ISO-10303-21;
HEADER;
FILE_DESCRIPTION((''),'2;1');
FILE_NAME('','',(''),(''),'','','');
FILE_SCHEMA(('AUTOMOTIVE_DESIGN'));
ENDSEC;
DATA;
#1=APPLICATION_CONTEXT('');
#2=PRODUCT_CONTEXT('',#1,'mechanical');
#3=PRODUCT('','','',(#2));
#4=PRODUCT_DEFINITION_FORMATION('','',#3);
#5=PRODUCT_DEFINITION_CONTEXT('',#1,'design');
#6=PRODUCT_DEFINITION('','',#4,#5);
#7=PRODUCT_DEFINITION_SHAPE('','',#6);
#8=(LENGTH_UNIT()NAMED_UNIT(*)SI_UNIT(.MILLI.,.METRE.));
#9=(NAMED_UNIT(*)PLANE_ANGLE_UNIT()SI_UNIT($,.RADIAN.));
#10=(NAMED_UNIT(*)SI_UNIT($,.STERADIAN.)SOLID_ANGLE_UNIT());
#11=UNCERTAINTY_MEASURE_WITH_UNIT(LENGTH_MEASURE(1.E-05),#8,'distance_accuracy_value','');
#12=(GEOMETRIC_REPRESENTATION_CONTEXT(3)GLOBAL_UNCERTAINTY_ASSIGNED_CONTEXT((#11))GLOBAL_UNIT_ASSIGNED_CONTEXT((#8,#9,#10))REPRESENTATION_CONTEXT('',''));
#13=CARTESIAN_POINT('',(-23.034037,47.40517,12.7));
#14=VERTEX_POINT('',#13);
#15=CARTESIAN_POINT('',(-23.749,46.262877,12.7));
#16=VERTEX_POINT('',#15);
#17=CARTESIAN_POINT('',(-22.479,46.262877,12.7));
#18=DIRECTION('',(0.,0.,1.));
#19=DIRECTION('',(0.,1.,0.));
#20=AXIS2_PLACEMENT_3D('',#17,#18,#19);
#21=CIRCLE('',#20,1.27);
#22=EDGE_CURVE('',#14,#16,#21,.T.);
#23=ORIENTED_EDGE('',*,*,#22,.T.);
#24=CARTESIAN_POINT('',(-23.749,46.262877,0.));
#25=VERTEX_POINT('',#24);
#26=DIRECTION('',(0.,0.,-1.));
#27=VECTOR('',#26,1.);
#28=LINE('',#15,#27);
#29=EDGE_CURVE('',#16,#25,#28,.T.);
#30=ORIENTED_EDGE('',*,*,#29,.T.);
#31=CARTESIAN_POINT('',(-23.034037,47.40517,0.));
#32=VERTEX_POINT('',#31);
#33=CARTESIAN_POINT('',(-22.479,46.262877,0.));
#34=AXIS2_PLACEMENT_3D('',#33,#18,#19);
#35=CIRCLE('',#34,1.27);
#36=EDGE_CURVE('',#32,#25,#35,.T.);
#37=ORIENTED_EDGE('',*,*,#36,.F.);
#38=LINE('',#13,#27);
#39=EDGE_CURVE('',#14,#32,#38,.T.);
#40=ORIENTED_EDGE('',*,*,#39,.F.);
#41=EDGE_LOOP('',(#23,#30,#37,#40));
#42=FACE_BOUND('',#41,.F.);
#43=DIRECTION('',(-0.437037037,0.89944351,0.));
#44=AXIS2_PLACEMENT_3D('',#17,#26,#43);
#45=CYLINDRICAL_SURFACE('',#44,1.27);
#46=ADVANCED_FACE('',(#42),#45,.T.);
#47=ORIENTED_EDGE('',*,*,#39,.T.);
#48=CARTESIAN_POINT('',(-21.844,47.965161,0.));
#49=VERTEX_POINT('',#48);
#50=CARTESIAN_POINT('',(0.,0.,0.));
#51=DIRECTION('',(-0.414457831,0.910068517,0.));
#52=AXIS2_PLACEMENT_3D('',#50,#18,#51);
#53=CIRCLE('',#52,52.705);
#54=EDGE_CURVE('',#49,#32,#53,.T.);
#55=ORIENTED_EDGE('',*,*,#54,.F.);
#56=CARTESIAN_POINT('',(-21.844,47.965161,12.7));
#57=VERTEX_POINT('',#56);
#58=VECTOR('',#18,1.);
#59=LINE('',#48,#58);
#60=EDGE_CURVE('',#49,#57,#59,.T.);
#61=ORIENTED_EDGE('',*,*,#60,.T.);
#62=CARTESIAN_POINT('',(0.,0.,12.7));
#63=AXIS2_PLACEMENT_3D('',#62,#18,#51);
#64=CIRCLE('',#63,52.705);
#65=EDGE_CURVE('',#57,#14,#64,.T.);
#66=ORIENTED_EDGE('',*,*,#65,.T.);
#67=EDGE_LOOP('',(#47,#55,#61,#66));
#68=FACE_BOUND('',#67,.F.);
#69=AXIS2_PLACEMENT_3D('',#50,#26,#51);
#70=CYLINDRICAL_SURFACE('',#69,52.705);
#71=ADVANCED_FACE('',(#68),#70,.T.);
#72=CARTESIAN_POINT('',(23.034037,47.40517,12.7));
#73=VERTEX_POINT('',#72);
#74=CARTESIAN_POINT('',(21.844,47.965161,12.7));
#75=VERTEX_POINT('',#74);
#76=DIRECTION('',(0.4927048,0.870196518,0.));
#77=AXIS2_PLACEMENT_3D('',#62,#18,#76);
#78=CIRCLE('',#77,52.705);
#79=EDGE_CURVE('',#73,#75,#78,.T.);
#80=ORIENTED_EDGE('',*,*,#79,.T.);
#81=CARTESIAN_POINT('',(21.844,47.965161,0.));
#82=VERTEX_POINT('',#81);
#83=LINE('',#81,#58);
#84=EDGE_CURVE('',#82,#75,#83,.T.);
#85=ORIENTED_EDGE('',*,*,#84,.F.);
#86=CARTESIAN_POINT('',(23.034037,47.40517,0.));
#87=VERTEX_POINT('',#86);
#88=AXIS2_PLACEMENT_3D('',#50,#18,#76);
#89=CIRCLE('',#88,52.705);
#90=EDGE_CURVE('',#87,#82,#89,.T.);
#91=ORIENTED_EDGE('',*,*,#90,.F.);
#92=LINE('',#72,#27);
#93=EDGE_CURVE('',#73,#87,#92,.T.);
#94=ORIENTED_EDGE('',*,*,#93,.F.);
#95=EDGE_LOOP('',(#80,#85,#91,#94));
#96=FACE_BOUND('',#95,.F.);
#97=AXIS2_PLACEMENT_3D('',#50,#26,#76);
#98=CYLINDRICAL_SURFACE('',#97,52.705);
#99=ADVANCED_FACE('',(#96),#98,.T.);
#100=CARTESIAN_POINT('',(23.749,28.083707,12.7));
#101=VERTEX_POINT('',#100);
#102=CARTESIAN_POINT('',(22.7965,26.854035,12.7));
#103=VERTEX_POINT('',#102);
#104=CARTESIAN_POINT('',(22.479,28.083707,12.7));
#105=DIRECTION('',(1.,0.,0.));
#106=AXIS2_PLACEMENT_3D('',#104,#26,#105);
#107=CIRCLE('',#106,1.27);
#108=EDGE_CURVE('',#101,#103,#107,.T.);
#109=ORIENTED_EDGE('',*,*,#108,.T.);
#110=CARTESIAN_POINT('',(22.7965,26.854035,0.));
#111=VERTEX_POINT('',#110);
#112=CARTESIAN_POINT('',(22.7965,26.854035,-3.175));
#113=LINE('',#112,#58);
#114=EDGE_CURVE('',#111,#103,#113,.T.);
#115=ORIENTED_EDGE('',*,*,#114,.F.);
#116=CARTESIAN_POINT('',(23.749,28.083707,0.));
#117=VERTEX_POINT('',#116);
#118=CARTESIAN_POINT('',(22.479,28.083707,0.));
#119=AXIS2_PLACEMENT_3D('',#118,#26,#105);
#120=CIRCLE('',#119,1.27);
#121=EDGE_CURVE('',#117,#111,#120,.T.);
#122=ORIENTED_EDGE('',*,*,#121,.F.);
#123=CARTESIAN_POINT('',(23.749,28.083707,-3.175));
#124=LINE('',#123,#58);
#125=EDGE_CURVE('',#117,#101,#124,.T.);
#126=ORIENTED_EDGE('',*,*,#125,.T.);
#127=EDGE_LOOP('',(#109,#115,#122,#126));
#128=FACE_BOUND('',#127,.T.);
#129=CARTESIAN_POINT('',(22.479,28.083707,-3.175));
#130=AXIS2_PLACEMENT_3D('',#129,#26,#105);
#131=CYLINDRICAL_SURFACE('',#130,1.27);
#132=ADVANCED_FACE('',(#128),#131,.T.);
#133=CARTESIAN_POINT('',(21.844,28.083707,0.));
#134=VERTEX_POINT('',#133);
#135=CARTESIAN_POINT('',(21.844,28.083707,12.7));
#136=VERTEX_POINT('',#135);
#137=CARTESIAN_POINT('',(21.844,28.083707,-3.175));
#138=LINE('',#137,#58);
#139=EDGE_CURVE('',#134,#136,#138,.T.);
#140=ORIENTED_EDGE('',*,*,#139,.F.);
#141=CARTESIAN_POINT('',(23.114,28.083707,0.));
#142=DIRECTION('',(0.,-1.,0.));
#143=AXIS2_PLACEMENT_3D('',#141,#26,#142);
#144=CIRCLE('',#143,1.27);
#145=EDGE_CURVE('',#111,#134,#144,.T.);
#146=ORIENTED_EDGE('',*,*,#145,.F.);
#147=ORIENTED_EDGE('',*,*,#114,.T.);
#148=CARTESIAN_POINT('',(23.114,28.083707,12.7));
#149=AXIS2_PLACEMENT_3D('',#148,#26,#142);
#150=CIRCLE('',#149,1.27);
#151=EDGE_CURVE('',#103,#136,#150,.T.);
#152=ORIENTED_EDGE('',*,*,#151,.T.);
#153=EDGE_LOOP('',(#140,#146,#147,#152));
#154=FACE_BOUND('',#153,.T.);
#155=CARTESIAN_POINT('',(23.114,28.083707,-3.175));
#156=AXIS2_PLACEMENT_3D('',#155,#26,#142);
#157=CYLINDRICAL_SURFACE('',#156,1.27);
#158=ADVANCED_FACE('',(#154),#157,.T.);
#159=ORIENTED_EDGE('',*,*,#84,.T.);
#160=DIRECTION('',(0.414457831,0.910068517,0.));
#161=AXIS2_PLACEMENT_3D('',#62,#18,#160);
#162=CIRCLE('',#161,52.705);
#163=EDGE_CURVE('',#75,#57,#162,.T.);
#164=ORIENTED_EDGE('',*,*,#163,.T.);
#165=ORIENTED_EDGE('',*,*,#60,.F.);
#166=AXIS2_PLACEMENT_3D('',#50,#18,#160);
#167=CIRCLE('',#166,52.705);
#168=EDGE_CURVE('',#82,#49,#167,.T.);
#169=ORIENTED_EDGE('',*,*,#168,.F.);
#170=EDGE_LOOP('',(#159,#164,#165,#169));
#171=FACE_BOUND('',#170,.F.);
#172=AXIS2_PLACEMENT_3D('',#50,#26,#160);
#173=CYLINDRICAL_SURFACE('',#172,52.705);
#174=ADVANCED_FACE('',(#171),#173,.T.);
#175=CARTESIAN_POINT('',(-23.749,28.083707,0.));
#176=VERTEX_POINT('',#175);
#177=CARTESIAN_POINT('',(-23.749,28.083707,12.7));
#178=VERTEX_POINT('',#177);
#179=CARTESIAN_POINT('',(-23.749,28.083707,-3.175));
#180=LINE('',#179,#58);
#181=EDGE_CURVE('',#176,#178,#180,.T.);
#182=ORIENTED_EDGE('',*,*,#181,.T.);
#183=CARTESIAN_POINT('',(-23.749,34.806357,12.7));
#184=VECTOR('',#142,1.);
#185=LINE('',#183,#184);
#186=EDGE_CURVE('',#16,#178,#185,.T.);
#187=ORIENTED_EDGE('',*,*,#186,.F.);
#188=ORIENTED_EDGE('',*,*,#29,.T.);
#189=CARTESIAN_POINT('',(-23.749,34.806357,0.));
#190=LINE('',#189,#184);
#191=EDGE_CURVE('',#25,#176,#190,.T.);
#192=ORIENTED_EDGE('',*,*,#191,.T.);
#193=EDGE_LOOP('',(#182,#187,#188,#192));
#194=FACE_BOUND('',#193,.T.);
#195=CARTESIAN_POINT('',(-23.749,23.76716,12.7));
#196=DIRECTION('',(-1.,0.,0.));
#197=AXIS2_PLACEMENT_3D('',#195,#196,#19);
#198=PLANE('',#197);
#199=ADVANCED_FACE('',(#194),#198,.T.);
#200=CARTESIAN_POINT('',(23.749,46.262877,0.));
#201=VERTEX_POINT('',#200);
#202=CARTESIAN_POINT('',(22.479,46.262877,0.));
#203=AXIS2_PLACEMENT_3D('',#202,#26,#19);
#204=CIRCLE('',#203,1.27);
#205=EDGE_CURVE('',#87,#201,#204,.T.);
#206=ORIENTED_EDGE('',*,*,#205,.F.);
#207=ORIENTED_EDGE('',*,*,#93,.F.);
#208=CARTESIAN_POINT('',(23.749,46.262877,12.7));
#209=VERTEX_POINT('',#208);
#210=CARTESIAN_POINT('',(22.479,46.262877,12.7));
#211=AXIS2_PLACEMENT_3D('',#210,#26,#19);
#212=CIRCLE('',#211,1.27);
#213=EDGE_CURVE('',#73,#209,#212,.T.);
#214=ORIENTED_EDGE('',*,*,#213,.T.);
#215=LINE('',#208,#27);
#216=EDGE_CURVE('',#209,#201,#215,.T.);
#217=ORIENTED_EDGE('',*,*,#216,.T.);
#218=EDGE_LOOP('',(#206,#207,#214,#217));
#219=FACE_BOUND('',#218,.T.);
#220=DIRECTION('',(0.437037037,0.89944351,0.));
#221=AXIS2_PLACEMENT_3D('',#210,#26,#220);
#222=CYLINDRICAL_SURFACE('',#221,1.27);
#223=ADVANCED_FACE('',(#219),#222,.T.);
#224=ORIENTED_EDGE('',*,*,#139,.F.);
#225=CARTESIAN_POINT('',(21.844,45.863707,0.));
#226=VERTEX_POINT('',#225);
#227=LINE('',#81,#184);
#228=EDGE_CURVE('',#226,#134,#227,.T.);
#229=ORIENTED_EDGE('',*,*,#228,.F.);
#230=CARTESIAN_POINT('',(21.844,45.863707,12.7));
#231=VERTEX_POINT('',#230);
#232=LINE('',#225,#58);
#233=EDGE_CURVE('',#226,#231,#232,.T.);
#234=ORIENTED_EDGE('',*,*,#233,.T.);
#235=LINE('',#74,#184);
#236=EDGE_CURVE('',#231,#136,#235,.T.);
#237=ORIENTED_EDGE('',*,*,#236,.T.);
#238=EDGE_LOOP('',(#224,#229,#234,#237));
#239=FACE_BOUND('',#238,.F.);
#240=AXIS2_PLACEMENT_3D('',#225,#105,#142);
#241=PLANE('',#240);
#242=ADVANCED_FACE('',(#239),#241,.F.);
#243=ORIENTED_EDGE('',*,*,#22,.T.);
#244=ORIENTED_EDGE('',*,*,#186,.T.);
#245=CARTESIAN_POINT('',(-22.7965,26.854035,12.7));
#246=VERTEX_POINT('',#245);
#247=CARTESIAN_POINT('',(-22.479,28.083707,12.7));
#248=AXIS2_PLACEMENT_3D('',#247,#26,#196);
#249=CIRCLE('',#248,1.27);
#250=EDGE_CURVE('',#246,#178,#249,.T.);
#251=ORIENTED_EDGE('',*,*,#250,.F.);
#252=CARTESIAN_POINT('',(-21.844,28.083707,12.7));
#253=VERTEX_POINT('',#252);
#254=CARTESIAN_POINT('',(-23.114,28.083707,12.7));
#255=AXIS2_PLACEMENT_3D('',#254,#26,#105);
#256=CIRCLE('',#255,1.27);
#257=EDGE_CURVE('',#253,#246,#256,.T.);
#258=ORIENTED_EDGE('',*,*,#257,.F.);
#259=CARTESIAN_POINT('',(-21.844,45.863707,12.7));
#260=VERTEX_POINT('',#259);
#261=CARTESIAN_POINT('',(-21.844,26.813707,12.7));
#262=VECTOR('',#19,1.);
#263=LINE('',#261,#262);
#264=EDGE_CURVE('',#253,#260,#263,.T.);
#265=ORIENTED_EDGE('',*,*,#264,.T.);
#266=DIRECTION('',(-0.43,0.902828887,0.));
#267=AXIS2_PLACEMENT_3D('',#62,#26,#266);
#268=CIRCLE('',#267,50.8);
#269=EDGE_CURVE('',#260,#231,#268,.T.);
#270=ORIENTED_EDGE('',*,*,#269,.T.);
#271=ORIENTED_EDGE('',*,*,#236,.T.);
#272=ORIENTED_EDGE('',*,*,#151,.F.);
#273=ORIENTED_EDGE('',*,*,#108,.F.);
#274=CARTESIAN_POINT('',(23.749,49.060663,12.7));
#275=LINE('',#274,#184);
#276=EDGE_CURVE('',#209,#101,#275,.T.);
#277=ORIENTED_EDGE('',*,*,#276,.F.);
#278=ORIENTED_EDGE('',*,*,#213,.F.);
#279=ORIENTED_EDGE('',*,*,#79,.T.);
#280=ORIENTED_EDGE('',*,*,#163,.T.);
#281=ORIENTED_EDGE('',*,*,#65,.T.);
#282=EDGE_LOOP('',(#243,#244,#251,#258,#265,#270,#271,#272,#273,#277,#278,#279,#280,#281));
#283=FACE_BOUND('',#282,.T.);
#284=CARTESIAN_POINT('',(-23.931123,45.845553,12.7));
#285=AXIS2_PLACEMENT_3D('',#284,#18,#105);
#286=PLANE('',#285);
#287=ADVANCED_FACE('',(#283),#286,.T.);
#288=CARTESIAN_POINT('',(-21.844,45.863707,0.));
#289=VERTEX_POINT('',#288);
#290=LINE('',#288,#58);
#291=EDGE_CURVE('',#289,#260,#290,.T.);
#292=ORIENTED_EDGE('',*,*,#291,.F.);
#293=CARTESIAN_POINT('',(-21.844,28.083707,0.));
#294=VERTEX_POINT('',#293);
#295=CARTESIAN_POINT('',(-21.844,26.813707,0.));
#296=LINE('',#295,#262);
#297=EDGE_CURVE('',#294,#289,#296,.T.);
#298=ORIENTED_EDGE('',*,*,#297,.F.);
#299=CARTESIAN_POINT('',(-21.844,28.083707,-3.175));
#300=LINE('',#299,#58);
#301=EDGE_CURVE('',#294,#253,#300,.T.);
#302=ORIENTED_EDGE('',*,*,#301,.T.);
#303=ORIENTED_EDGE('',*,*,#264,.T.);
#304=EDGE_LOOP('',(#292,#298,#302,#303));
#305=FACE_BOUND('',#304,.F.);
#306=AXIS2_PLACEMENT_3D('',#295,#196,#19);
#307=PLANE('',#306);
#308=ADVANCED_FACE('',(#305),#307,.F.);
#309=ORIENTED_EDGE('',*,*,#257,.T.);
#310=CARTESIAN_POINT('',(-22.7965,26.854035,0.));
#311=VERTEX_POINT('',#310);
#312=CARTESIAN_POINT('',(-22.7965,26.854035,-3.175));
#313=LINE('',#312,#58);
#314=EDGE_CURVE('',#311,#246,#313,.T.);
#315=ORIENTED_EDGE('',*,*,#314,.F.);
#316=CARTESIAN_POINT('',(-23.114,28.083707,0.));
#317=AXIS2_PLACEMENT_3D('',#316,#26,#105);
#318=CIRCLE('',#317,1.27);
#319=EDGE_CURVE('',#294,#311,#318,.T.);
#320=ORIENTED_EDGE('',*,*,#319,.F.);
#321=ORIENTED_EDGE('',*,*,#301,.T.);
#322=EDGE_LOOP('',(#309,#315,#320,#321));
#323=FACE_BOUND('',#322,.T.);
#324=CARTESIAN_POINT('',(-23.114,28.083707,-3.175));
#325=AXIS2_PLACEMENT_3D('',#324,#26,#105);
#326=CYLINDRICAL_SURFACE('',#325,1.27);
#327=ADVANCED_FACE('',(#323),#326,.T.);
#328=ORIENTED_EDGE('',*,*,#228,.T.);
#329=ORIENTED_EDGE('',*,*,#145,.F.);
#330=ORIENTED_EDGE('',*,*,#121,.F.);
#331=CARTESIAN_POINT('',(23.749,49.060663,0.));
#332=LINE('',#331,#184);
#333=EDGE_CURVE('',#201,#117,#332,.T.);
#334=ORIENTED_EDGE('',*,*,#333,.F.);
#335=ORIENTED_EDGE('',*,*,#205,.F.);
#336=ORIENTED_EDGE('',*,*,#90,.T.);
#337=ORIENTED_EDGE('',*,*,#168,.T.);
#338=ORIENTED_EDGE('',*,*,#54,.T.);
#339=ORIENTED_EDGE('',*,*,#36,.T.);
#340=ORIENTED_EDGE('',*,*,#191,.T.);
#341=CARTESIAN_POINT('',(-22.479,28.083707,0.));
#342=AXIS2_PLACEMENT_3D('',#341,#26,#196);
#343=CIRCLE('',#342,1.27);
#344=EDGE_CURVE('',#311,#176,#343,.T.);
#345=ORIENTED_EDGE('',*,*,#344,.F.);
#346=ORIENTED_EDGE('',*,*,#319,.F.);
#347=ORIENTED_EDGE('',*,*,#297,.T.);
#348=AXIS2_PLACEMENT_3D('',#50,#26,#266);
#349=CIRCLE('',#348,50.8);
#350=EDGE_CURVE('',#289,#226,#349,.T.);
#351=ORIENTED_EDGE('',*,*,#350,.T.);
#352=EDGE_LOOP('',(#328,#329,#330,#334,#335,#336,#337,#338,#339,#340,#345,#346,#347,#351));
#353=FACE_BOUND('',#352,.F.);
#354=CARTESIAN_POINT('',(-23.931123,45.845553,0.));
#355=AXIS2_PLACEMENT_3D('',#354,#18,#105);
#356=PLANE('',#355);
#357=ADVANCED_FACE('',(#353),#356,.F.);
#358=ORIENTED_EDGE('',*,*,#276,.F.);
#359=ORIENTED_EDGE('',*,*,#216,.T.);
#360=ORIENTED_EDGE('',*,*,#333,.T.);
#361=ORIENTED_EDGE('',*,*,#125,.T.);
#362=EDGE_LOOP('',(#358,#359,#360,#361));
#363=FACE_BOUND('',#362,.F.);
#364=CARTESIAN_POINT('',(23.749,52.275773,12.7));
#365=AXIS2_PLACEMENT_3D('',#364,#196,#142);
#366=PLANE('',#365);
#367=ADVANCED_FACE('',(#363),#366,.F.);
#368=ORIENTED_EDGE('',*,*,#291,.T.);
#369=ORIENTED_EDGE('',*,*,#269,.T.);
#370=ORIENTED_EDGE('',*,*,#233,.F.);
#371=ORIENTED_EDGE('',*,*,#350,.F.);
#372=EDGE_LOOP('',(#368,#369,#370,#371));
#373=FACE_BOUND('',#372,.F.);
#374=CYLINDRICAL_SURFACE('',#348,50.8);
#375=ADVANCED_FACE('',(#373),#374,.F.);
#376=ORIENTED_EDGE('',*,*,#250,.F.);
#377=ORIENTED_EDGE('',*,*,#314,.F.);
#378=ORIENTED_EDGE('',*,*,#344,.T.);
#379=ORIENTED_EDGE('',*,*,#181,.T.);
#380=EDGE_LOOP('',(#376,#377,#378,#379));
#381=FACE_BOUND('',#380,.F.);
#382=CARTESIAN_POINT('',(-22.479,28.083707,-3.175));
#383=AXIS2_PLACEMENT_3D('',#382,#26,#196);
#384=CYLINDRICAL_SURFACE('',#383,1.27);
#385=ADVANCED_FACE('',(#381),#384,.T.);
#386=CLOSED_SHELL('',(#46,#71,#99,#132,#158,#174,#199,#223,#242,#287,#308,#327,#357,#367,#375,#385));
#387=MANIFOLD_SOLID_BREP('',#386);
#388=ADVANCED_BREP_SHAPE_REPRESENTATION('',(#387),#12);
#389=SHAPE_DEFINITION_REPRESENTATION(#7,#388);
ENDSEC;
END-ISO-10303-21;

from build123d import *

# Parameters (mm, degrees)
F1_DEPTH    = 12.7
F3_DEPTH    = 32.1945
F4_T1_DEPTH = 19.05
F5_R        = 1.27


# Not quite as in the source:
# - a fillet or chamfer that OpenCascade refuses, or shapes differently, is made with other operations: its cross-section is extruded or revolved along the edge and cut away or added


with BuildPart() as f1:
    # F0 (on Top) → F1 (new body)
    with BuildSketch(Plane.XY):
        with BuildLine():
            Line((-25.9680064888, 45.8637074821), (-25.9680064888, 43.6612258073))
            ThreePointArc((-25.9680064888, 43.6612258073), (-23.9313543809, 44.8099350312), (-21.844, 45.8637074821))
            Line((-21.844, 45.8637074821), (-21.844, 47.9651612006))
            ThreePointArc((-21.844, 47.9651612006), (-23.929083101, 46.9597275008), (-25.9680064888, 45.8637074821))
        make_face()
        with BuildLine():
            ThreePointArc((-21.844, 45.8637074821), (-23.9313543809, 44.8099350312), (-25.9680064888, 43.6612258073))
            Line((-25.9680064888, 43.6612258073), (-25.9680064888, 26.8137074821))
            Line((-25.9680064888, 26.8137074821), (-21.844, 26.8137074821))
            Line((-21.844, 26.8137074821), (-21.844, 45.8637074821))
        make_face()
        with BuildLine():
            ThreePointArc((21.844, 45.8637074821), (23.9313543809, 44.8099350312), (25.9680064888, 43.6612258073))
            Line((25.9680064888, 43.6612258073), (25.9680064888, 45.8637074821))
            ThreePointArc((25.9680064888, 45.8637074821), (23.929083101, 46.9597275008), (21.844, 47.9651612006))
            Line((21.844, 47.9651612006), (21.844, 45.8637074821))
        make_face()
        with BuildLine():
            Line((25.9680064888, 26.8137074821), (25.9680064888, 43.6612258073))
            ThreePointArc((25.9680064888, 43.6612258073), (23.9313543809, 44.8099350312), (21.844, 45.8637074821))
            Line((21.844, 45.8637074821), (21.844, 26.8137074821))
            Line((21.844, 26.8137074821), (25.9680064888, 26.8137074821))
        make_face()
        with BuildLine():
            ThreePointArc((-21.844, 45.8637074821), (0, 50.8), (21.844, 45.8637074821))
            Line((21.844, 45.8637074821), (21.844, 47.9651612006))
            ThreePointArc((21.844, 47.9651612006), (0, 52.705), (-21.844, 47.9651612006))
            Line((-21.844, 47.9651612006), (-21.844, 45.8637074821))
        make_face()
    extrude(amount=F1_DEPTH)

    # F2 (on face) → F3 (cut, symmetric)
    with BuildSketch(Plane.XY.offset(12.7)):
        with BuildLine():
            Line((-23.749, 47.0510576289), (-23.749, 52.2757731378))
            Line((-23.749, 52.2757731378), (-31.0743017153, 52.1406124749))
            Line((-31.0743017153, 52.1406124749), (-30.5507772572, 23.7671602517))
            Line((-30.5507772572, 23.7671602517), (-23.749, 23.7671602517))
            Line((-23.749, 23.7671602517), (-23.749, 26.8137074821))
            Line((-23.749, 26.8137074821), (-25.9680064888, 26.8137074821))
            Line((-25.9680064888, 26.8137074821), (-25.9680064888, 45.8637074821))
            ThreePointArc((-25.9680064888, 45.8637074821), (-24.8655913592, 46.4706293411), (-23.749, 47.0510576289))
        make_face()
        with BuildLine():
            Line((23.749, 52.2757731378), (23.749, 47.0510576289))
            ThreePointArc((23.749, 47.0510576289), (24.8655913592, 46.4706293411), (25.9680064888, 45.8637074821))
            Line((25.9680064888, 45.8637074821), (25.9680064888, 26.8137074821))
            Line((25.9680064888, 26.8137074821), (23.749, 26.8137074821))
            Line((23.749, 26.8137074821), (23.749, 23.7671602517))
            Line((23.749, 23.7671602517), (30.5507772572, 23.7671602517))
            Line((30.5507772572, 23.7671602517), (31.0743017153, 52.1406124749))
            Line((31.0743017153, 52.1406124749), (23.749, 52.2757731378))
        make_face()
        with BuildLine():
            Line((-23.749, 26.8137074821), (-23.749, 47.0510576289))
            ThreePointArc((-23.749, 47.0510576289), (-24.8655913592, 46.4706293411), (-25.9680064888, 45.8637074821))
            Line((-25.9680064888, 45.8637074821), (-25.9680064888, 26.8137074821))
            Line((-25.9680064888, 26.8137074821), (-23.749, 26.8137074821))
        make_face()
        with BuildLine():
            ThreePointArc((25.9680064888, 45.8637074821), (24.8655913592, 46.4706293411), (23.749, 47.0510576289))
            Line((23.749, 47.0510576289), (23.749, 26.8137074821))
            Line((23.749, 26.8137074821), (25.9680064888, 26.8137074821))
            Line((25.9680064888, 26.8137074821), (25.9680064888, 45.8637074821))
        make_face()
    extrude(amount=F3_DEPTH, both=True, mode=Mode.SUBTRACT)

    # F4: fillet of radius 1.27 on 4 edges, made by hand

    # F4_s2 → F4_t1 (cut)
    with BuildSketch(Plane.XY.offset(-3.175)):
        with BuildLine():
            ThreePointArc((-21.844, 28.0837074821), (-22.2159743879, 27.18568187), (-23.114, 26.8137074821))
            Line((-23.114, 26.8137074821), (-21.844, 26.8137074821))
            Line((-21.844, 26.8137074821), (-21.844, 28.0837074821))
        make_face()
        with BuildLine():
            ThreePointArc((-23.749, 28.0837074821), (-23.3770256121, 27.18568187), (-22.479, 26.8137074821))
            Line((-22.479, 26.8137074821), (-23.749, 26.8137074821))
            Line((-23.749, 26.8137074821), (-23.749, 28.0837074821))
        make_face()
        with BuildLine():
            ThreePointArc((23.114, 26.8137074821), (22.2159743879, 27.18568187), (21.844, 28.0837074821))
            Line((21.844, 28.0837074821), (21.844, 26.8137074821))
            Line((21.844, 26.8137074821), (23.114, 26.8137074821))
        make_face()
        with BuildLine():
            ThreePointArc((23.749, 28.0837074821), (23.3770256121, 27.18568187), (22.479, 26.8137074821))
            Line((22.479, 26.8137074821), (23.749, 26.8137074821))
            Line((23.749, 26.8137074821), (23.749, 28.0837074821))
        make_face()
    extrude(amount=F4_T1_DEPTH, mode=Mode.SUBTRACT)

    # F5
    f5_edges = [f1.edges().sort_by_distance(p)[0] for p in [
        (23.749, 47.051058, 6.35),
        (-23.749, 47.051058, 6.35),
    ]]
    fillet(f5_edges, radius=F5_R)


solid = f1.part
